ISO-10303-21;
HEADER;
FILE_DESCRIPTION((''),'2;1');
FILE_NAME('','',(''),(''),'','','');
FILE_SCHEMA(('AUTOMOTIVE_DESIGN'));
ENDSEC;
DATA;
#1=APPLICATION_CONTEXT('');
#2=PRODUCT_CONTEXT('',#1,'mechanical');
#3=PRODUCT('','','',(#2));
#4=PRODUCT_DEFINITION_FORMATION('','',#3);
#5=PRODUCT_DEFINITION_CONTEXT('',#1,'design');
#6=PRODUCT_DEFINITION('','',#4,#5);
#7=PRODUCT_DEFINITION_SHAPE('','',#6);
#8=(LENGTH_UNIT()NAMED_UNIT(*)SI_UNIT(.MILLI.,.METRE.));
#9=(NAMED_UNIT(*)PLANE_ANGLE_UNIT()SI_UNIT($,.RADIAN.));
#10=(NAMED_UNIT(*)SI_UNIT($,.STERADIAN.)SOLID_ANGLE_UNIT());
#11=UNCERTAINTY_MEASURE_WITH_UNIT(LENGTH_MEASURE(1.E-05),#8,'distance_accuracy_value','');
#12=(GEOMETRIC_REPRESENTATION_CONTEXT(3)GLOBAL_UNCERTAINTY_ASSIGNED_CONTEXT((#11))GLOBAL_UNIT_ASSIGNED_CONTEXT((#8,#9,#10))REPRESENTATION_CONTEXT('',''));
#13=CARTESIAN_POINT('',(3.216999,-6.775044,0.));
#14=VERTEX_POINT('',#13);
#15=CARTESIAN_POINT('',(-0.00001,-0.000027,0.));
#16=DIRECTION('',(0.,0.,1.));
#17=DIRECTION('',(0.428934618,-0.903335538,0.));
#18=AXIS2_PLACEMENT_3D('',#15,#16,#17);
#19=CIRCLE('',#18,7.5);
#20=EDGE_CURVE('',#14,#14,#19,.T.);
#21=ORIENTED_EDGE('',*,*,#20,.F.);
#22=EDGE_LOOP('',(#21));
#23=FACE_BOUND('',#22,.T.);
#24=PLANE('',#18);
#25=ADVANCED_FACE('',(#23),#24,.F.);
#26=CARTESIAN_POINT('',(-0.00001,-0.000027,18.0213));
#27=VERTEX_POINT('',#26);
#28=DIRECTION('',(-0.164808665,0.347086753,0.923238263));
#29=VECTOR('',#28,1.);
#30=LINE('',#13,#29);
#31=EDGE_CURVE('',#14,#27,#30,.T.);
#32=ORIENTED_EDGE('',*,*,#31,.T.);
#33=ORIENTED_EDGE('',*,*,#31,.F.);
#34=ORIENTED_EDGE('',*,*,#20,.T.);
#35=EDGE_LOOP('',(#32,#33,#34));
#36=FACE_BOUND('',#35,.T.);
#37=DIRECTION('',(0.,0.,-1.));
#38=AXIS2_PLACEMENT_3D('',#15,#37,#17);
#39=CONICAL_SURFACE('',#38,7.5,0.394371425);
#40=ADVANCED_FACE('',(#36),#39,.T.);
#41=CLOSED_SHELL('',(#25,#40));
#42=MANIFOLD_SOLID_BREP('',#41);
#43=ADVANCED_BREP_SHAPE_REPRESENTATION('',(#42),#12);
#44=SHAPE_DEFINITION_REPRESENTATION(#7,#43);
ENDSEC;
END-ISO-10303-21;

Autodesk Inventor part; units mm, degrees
ref_plane "YZ Plane" through (0, 0, 0) normal (1, 0, 0) x (0, 1, 0)
ref_plane "XZ Plane" through (0, 0, 0) normal (0, 1, 0) x (-1, 0, 0)
ref_plane "XY Plane" through (0, 0, 0) normal (0, 0, 1) x (1, 0, 0)
ref_plane "Work Plane1" through (14.1677, -29.8372, 1) normal (-0.9033355, -0.4289346, 0) x (0, 0, 1)
sketch "Sketch1" plane through (14.1677, -29.8372, 1) normal (-0.9033355, -0.4289346, 0) x (0, 0, 1)
  line L0 (-1, 40.53) -> (-1, 25.53) projected
  line L1 (-1, 33.03) -> (42.6224, 33.03)
  line L2 (42.6224, 33.03) -> (42.6224, 14.5833)
  line L3 (42.6224, 14.5833) -> (17.0213, 33.03)
  line L4 (-1, 25.53) -> (17.0213, 33.03)
  line L5 (-1, 25.53) -> (-1, 33.03)
revolve "Revolution1" add sketch "Sketch1" angle 360 about axis through (0, 0, 0) along (0, 0, 1) contours L1 L4 L0
properties part number "00_lightshit_ray2"
